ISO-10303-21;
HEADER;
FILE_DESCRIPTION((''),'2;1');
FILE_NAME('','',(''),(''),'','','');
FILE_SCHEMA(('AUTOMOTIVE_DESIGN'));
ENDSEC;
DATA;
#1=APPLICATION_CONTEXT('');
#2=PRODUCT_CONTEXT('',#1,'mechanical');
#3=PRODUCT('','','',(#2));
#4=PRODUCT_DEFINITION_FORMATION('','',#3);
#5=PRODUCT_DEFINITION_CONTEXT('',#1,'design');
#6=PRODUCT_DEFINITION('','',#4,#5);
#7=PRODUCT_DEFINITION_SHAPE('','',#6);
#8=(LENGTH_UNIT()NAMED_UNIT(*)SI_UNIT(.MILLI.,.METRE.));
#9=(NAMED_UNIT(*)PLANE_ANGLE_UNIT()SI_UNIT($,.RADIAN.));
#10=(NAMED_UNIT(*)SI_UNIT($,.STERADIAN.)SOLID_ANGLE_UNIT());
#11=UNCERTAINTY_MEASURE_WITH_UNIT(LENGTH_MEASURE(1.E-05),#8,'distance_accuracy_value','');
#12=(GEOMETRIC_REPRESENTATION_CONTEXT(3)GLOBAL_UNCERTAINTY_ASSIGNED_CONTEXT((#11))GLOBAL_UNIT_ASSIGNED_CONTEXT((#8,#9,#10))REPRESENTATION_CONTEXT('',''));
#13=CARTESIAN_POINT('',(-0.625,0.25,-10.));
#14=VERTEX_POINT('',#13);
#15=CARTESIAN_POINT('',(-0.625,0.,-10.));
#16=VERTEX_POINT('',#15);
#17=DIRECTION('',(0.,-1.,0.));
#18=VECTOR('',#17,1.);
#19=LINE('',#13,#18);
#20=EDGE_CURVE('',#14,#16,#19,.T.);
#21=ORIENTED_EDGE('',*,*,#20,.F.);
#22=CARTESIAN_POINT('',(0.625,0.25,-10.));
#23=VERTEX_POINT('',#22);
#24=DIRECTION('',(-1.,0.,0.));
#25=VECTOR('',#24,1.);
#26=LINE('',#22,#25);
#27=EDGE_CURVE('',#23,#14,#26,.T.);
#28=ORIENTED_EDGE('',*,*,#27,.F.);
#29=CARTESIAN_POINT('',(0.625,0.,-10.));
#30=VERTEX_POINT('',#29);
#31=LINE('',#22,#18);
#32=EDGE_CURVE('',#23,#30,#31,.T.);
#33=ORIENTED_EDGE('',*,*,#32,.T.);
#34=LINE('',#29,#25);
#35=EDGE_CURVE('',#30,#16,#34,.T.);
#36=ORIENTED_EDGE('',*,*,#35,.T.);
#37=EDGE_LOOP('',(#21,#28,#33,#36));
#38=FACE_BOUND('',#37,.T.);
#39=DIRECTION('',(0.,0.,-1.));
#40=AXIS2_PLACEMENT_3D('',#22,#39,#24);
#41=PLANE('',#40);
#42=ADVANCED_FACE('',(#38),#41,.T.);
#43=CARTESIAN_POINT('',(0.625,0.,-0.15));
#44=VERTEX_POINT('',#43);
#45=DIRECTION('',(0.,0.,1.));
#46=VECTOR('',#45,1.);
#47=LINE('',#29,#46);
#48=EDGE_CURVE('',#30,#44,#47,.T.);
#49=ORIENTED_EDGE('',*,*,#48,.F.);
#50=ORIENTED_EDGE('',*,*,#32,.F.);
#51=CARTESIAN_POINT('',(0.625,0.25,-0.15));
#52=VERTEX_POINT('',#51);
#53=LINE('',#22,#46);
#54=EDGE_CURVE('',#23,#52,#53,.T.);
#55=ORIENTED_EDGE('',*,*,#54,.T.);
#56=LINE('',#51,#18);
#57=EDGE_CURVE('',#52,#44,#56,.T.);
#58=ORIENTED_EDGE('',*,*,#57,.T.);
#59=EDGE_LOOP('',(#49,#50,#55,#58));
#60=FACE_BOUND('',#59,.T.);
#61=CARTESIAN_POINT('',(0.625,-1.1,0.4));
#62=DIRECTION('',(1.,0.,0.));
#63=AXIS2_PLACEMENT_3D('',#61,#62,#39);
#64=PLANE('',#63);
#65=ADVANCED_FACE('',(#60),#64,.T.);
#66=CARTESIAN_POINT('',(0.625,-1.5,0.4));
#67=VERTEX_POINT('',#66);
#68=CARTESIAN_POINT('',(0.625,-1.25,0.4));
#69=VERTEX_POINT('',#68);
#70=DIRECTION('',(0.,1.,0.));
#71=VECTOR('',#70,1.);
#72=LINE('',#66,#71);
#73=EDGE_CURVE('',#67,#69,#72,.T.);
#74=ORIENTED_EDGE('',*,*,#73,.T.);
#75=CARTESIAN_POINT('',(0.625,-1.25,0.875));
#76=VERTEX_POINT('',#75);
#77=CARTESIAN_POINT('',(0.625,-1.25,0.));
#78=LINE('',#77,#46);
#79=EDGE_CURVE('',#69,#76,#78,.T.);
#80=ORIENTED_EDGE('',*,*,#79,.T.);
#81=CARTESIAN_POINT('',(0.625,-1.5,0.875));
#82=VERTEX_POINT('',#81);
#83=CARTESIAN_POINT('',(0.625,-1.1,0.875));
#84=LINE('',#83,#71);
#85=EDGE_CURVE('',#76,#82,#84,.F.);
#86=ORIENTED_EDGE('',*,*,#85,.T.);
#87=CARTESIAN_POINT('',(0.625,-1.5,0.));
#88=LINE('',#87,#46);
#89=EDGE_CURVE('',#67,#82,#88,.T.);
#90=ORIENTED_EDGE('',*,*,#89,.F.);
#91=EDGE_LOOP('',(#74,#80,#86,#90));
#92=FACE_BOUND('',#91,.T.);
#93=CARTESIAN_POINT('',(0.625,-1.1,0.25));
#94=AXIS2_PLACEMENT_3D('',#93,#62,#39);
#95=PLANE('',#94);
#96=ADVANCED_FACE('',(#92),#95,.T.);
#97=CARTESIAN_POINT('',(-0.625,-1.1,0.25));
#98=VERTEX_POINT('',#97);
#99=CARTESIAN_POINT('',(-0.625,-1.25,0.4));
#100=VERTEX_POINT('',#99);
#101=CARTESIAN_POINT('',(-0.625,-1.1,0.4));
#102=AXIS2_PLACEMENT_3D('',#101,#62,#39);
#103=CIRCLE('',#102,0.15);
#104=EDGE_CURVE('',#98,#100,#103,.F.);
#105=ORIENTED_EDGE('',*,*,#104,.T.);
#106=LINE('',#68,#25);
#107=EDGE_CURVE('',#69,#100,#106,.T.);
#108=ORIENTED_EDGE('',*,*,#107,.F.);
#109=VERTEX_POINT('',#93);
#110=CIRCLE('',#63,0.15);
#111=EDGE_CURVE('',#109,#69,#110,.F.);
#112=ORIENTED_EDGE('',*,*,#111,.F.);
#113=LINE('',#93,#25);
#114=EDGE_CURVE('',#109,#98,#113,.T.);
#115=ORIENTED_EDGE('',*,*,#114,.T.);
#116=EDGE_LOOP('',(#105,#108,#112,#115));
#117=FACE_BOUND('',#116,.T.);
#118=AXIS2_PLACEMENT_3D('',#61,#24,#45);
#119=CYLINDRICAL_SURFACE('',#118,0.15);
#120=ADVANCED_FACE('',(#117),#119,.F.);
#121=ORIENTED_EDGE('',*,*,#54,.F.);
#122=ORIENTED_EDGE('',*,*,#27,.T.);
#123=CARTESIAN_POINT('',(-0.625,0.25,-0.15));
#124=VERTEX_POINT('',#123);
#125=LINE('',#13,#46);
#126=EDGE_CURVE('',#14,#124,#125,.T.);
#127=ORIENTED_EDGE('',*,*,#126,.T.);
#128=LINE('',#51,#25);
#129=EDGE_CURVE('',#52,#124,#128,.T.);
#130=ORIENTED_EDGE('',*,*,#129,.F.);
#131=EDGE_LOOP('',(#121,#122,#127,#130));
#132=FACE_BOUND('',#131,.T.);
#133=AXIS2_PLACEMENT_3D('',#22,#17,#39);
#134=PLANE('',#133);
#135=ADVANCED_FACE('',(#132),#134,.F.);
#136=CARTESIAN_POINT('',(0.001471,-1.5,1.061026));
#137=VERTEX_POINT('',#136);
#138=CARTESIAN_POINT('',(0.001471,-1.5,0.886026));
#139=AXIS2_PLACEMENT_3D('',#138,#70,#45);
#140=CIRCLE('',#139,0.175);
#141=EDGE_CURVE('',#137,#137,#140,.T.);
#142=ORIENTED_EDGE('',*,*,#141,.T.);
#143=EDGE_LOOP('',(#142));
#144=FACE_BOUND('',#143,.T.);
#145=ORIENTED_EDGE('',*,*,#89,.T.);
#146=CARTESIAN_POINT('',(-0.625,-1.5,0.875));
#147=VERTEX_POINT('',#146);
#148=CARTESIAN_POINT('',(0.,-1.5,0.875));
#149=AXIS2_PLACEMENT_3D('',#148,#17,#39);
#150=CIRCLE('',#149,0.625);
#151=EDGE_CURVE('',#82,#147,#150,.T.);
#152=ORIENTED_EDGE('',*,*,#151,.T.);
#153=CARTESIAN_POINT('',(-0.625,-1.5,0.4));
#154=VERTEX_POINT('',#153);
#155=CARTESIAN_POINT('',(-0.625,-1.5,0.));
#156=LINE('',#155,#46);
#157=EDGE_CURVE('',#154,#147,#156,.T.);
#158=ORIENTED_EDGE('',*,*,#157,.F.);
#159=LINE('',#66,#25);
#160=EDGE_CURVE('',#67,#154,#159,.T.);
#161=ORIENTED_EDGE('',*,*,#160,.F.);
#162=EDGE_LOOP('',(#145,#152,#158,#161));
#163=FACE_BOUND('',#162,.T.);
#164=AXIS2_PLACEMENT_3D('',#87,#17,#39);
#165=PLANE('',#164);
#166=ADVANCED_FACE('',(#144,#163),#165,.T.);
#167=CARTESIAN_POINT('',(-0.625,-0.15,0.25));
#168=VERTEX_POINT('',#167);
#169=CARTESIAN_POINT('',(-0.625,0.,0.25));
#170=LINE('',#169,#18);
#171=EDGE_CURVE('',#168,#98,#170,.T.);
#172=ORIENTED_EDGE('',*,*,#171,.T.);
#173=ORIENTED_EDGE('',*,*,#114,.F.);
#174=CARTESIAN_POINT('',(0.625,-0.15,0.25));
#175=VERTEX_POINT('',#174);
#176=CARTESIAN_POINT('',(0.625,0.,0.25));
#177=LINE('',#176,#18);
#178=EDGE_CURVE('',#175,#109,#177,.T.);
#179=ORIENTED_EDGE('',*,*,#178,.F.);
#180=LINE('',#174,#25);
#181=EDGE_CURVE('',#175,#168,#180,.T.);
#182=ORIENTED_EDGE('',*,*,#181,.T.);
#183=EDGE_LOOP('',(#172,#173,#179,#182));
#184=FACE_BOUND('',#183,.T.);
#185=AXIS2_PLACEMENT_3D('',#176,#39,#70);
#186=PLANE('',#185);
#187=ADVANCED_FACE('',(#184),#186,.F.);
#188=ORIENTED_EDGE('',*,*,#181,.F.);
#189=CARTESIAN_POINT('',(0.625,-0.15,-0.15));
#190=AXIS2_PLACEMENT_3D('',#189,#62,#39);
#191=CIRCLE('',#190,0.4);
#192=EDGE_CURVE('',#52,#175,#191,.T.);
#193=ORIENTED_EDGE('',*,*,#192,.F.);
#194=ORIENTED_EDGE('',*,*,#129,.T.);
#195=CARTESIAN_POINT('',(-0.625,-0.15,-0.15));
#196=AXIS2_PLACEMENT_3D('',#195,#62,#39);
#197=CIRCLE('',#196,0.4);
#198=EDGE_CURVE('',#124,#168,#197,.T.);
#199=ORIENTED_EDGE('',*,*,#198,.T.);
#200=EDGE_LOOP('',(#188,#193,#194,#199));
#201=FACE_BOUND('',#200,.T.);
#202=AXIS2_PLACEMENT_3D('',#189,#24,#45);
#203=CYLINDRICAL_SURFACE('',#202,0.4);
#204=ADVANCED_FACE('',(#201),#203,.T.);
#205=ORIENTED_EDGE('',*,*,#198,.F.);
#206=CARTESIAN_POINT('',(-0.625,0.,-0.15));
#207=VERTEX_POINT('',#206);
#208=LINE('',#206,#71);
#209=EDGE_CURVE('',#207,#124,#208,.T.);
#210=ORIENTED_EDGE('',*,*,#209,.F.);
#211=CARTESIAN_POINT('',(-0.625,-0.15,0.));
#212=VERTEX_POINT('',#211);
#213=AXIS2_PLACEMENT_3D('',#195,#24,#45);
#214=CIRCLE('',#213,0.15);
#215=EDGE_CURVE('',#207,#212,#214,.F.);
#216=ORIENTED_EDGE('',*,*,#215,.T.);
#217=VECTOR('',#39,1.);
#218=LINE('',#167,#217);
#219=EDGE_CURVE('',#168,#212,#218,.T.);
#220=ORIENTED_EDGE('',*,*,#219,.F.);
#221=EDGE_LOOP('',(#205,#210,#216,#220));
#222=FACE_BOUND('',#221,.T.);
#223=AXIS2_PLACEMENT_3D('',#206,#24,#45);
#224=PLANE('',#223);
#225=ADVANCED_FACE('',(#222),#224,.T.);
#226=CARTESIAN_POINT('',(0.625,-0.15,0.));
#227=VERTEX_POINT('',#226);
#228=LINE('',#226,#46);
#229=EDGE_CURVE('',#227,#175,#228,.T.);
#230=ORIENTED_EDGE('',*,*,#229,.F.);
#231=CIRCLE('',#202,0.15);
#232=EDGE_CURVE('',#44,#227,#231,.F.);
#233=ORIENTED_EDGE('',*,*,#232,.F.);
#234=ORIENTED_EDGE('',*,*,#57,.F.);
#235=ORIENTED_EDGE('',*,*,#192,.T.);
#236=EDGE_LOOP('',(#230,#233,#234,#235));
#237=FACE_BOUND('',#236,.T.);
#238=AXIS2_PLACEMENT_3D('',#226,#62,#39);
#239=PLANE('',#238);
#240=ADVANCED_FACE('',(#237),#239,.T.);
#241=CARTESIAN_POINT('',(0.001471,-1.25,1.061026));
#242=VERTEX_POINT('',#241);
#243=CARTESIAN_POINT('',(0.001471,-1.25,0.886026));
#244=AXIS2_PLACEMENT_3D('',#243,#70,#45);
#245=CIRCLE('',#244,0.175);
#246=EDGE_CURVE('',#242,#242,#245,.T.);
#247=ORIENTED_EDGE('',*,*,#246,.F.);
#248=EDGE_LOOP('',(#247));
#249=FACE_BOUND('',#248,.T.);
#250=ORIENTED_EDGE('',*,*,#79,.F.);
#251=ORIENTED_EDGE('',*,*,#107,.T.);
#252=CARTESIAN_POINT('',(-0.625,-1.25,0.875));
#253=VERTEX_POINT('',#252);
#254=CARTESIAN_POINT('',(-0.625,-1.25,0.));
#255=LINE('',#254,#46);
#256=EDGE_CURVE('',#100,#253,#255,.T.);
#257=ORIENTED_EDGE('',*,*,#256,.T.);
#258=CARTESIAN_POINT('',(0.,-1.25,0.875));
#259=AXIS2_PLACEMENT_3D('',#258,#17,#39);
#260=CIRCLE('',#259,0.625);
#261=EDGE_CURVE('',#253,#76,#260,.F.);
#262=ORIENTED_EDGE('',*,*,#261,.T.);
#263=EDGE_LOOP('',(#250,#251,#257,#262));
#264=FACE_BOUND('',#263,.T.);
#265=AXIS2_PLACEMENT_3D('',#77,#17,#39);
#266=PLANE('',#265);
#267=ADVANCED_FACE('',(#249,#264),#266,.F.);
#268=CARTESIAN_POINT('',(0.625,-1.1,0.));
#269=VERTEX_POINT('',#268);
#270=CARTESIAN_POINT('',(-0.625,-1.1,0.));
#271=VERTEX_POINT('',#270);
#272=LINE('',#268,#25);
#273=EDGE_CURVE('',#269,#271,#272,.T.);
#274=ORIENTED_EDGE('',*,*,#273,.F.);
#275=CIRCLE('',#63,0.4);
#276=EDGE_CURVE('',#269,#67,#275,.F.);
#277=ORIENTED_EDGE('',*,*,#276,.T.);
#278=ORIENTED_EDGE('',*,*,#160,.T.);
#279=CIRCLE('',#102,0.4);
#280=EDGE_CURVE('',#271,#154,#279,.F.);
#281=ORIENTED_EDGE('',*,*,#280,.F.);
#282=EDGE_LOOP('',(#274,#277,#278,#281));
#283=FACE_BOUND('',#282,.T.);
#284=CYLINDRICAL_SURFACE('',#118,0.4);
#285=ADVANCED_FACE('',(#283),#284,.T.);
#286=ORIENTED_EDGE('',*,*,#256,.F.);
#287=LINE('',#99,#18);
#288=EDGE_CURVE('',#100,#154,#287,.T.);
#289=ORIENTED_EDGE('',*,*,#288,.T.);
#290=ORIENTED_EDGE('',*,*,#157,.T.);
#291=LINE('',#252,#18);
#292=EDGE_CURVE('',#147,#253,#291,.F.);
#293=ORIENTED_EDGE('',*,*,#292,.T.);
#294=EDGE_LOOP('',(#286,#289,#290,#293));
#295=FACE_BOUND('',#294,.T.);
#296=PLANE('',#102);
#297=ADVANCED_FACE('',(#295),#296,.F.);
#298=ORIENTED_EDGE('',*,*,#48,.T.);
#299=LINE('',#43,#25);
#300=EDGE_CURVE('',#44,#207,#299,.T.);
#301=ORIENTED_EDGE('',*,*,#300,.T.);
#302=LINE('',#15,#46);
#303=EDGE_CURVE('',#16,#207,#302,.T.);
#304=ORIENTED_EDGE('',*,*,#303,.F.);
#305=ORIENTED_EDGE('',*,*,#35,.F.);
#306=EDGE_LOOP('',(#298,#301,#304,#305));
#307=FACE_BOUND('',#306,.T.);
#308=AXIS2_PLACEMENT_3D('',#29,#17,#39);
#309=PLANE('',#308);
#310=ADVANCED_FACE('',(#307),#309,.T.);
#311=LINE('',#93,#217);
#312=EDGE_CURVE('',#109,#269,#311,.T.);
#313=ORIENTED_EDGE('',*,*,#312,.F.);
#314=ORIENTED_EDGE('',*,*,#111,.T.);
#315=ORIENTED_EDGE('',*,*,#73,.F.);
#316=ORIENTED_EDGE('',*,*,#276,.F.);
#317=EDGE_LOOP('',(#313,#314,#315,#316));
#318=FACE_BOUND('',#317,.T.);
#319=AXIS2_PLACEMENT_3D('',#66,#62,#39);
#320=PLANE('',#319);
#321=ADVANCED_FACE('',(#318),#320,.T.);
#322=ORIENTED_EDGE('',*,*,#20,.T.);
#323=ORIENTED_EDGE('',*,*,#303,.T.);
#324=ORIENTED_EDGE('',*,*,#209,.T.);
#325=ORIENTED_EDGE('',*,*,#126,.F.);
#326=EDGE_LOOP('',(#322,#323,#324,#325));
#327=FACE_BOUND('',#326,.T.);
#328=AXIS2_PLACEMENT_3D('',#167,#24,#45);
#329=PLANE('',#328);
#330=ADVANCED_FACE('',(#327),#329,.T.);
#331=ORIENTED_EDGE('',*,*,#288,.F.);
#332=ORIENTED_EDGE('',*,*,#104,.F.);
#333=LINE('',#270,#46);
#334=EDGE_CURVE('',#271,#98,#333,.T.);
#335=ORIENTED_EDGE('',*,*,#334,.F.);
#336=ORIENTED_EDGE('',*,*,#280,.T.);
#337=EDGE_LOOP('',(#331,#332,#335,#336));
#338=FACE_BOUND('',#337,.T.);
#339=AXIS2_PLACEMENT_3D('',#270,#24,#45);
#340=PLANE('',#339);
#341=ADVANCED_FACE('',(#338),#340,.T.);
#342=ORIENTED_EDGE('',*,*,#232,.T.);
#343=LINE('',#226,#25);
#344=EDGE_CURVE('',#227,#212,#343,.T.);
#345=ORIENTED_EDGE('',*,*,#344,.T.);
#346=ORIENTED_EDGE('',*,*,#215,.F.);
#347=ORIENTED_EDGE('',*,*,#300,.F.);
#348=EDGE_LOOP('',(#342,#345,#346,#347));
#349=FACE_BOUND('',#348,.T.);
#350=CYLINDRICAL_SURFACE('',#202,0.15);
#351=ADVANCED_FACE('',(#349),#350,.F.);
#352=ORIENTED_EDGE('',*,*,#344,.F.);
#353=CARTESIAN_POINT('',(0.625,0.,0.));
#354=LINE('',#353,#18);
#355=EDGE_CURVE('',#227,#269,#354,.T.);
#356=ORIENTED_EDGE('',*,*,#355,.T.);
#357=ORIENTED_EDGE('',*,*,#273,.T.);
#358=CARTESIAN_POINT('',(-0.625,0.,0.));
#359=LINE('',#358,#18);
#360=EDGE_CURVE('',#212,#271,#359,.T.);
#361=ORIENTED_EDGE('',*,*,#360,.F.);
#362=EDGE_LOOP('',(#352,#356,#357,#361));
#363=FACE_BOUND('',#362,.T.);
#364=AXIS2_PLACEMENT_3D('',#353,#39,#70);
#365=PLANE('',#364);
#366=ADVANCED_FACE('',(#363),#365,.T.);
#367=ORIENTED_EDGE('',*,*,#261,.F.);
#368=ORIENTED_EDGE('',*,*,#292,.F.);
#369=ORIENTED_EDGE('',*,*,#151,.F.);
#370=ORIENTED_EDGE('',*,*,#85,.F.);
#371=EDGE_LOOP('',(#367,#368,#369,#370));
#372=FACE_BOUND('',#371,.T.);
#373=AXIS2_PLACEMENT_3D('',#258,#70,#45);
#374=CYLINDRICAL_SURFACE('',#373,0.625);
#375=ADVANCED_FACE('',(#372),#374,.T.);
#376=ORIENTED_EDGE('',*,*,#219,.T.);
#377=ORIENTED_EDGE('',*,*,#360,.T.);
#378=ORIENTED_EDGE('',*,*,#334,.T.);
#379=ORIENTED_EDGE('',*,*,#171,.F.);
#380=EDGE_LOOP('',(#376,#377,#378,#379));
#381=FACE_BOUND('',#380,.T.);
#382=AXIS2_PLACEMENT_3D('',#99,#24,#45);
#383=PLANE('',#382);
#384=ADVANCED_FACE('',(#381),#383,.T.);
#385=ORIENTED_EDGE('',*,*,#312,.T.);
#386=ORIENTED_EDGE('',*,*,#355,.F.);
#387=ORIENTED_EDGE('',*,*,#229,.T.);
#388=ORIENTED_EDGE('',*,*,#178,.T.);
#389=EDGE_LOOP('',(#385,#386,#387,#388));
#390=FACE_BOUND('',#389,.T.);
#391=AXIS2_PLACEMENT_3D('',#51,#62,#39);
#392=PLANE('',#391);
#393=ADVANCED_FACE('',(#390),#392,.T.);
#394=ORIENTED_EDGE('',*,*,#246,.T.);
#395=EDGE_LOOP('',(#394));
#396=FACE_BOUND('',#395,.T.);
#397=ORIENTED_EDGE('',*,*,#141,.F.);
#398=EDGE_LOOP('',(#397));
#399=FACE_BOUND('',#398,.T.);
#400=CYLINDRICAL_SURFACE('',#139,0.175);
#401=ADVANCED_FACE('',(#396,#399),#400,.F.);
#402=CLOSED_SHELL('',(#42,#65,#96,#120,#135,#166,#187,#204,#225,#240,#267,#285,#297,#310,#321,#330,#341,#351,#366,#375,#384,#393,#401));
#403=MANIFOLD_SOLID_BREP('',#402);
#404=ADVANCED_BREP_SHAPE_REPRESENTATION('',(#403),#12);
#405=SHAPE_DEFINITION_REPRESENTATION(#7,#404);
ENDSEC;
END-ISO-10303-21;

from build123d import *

# Parameters (mm, degrees)
BASE_FLANGE1_DEPTH = 0.625
FILLET1_RADIUS     = 0.625
FILLET1_LENGTH     = 0.25
HOLE1_START        = -1.5
HOLE1_OUTLINE_R    = 0.175
HOLE1_DEPTH        = 0.25


# Read off the part's stored shape, not the designer's step: Hole1
# Sheet-metal steps are written as plain solids
with BuildPart() as part:
    # Sketch1 → Base-Flange1 (new, symmetric)
    with BuildSketch(Plane(origin=(0, 0, 0), x_dir=(0, 0, -1), z_dir=(1, 0, 0))):
        with BuildLine():
            Line((10, 0), (0.15, 0))
            ThreePointArc((0.15, 0), (0.043933983, -0.043933983), (0, -0.15))
            Line((0, -0.15), (0, -1.1))
            ThreePointArc((0, -1.1), (-0.117157288, -1.382842712), (-0.4, -1.5))
            Line((-0.4, -1.5), (-1.5, -1.5))
            Line((-1.5, -1.5), (-1.5, -1.25))
            Line((-1.5, -1.25), (-0.4, -1.25))
            ThreePointArc((-0.4, -1.25), (-0.293933983, -1.206066017), (-0.25, -1.1))
            Line((-0.25, -1.1), (-0.25, -0.15))
            ThreePointArc((-0.25, -0.15), (-0.132842712, 0.132842712), (0.15, 0.25))
            Line((0.15, 0.25), (10, 0.25))
            Line((10, 0.25), (10, 0))
        make_face()
    extrude(amount=BASE_FLANGE1_DEPTH, both=True)

    # Fillet1: full round fillet: the end face becomes a half cylinder, R = half its width
    fillet1_face = Plane((0, -1.375, 1.5), x_dir=(0, -1, 0), z_dir=(0, 0, 1))  # on the end face: x along it, z out of the body
    fillet1_slab = fillet1_face.offset(-FILLET1_RADIUS / 2) * Box(FILLET1_LENGTH, 2 * FILLET1_RADIUS, FILLET1_RADIUS, mode=Mode.PRIVATE)  # the body's end, R deep
    fillet1_round = Plane((0, -1.375, 0.875), x_dir=(0, 0, 1), z_dir=(0, -1, 0)) * Cylinder(FILLET1_RADIUS, FILLET1_LENGTH, mode=Mode.PRIVATE)  # its axis R under the face
    add(fillet1_slab - fillet1_round, mode=Mode.SUBTRACT)

    # Hole1 outline → Hole1 (cut)
    with BuildSketch(Plane(origin=(0, 0, 0), x_dir=(1, 0, 0), z_dir=(0, 1, 0)).offset(HOLE1_START)):
        with Locations((0.001471382, -0.886025874)):
            Circle(HOLE1_OUTLINE_R)
    extrude(amount=HOLE1_DEPTH, mode=Mode.SUBTRACT)


solid = part.part
